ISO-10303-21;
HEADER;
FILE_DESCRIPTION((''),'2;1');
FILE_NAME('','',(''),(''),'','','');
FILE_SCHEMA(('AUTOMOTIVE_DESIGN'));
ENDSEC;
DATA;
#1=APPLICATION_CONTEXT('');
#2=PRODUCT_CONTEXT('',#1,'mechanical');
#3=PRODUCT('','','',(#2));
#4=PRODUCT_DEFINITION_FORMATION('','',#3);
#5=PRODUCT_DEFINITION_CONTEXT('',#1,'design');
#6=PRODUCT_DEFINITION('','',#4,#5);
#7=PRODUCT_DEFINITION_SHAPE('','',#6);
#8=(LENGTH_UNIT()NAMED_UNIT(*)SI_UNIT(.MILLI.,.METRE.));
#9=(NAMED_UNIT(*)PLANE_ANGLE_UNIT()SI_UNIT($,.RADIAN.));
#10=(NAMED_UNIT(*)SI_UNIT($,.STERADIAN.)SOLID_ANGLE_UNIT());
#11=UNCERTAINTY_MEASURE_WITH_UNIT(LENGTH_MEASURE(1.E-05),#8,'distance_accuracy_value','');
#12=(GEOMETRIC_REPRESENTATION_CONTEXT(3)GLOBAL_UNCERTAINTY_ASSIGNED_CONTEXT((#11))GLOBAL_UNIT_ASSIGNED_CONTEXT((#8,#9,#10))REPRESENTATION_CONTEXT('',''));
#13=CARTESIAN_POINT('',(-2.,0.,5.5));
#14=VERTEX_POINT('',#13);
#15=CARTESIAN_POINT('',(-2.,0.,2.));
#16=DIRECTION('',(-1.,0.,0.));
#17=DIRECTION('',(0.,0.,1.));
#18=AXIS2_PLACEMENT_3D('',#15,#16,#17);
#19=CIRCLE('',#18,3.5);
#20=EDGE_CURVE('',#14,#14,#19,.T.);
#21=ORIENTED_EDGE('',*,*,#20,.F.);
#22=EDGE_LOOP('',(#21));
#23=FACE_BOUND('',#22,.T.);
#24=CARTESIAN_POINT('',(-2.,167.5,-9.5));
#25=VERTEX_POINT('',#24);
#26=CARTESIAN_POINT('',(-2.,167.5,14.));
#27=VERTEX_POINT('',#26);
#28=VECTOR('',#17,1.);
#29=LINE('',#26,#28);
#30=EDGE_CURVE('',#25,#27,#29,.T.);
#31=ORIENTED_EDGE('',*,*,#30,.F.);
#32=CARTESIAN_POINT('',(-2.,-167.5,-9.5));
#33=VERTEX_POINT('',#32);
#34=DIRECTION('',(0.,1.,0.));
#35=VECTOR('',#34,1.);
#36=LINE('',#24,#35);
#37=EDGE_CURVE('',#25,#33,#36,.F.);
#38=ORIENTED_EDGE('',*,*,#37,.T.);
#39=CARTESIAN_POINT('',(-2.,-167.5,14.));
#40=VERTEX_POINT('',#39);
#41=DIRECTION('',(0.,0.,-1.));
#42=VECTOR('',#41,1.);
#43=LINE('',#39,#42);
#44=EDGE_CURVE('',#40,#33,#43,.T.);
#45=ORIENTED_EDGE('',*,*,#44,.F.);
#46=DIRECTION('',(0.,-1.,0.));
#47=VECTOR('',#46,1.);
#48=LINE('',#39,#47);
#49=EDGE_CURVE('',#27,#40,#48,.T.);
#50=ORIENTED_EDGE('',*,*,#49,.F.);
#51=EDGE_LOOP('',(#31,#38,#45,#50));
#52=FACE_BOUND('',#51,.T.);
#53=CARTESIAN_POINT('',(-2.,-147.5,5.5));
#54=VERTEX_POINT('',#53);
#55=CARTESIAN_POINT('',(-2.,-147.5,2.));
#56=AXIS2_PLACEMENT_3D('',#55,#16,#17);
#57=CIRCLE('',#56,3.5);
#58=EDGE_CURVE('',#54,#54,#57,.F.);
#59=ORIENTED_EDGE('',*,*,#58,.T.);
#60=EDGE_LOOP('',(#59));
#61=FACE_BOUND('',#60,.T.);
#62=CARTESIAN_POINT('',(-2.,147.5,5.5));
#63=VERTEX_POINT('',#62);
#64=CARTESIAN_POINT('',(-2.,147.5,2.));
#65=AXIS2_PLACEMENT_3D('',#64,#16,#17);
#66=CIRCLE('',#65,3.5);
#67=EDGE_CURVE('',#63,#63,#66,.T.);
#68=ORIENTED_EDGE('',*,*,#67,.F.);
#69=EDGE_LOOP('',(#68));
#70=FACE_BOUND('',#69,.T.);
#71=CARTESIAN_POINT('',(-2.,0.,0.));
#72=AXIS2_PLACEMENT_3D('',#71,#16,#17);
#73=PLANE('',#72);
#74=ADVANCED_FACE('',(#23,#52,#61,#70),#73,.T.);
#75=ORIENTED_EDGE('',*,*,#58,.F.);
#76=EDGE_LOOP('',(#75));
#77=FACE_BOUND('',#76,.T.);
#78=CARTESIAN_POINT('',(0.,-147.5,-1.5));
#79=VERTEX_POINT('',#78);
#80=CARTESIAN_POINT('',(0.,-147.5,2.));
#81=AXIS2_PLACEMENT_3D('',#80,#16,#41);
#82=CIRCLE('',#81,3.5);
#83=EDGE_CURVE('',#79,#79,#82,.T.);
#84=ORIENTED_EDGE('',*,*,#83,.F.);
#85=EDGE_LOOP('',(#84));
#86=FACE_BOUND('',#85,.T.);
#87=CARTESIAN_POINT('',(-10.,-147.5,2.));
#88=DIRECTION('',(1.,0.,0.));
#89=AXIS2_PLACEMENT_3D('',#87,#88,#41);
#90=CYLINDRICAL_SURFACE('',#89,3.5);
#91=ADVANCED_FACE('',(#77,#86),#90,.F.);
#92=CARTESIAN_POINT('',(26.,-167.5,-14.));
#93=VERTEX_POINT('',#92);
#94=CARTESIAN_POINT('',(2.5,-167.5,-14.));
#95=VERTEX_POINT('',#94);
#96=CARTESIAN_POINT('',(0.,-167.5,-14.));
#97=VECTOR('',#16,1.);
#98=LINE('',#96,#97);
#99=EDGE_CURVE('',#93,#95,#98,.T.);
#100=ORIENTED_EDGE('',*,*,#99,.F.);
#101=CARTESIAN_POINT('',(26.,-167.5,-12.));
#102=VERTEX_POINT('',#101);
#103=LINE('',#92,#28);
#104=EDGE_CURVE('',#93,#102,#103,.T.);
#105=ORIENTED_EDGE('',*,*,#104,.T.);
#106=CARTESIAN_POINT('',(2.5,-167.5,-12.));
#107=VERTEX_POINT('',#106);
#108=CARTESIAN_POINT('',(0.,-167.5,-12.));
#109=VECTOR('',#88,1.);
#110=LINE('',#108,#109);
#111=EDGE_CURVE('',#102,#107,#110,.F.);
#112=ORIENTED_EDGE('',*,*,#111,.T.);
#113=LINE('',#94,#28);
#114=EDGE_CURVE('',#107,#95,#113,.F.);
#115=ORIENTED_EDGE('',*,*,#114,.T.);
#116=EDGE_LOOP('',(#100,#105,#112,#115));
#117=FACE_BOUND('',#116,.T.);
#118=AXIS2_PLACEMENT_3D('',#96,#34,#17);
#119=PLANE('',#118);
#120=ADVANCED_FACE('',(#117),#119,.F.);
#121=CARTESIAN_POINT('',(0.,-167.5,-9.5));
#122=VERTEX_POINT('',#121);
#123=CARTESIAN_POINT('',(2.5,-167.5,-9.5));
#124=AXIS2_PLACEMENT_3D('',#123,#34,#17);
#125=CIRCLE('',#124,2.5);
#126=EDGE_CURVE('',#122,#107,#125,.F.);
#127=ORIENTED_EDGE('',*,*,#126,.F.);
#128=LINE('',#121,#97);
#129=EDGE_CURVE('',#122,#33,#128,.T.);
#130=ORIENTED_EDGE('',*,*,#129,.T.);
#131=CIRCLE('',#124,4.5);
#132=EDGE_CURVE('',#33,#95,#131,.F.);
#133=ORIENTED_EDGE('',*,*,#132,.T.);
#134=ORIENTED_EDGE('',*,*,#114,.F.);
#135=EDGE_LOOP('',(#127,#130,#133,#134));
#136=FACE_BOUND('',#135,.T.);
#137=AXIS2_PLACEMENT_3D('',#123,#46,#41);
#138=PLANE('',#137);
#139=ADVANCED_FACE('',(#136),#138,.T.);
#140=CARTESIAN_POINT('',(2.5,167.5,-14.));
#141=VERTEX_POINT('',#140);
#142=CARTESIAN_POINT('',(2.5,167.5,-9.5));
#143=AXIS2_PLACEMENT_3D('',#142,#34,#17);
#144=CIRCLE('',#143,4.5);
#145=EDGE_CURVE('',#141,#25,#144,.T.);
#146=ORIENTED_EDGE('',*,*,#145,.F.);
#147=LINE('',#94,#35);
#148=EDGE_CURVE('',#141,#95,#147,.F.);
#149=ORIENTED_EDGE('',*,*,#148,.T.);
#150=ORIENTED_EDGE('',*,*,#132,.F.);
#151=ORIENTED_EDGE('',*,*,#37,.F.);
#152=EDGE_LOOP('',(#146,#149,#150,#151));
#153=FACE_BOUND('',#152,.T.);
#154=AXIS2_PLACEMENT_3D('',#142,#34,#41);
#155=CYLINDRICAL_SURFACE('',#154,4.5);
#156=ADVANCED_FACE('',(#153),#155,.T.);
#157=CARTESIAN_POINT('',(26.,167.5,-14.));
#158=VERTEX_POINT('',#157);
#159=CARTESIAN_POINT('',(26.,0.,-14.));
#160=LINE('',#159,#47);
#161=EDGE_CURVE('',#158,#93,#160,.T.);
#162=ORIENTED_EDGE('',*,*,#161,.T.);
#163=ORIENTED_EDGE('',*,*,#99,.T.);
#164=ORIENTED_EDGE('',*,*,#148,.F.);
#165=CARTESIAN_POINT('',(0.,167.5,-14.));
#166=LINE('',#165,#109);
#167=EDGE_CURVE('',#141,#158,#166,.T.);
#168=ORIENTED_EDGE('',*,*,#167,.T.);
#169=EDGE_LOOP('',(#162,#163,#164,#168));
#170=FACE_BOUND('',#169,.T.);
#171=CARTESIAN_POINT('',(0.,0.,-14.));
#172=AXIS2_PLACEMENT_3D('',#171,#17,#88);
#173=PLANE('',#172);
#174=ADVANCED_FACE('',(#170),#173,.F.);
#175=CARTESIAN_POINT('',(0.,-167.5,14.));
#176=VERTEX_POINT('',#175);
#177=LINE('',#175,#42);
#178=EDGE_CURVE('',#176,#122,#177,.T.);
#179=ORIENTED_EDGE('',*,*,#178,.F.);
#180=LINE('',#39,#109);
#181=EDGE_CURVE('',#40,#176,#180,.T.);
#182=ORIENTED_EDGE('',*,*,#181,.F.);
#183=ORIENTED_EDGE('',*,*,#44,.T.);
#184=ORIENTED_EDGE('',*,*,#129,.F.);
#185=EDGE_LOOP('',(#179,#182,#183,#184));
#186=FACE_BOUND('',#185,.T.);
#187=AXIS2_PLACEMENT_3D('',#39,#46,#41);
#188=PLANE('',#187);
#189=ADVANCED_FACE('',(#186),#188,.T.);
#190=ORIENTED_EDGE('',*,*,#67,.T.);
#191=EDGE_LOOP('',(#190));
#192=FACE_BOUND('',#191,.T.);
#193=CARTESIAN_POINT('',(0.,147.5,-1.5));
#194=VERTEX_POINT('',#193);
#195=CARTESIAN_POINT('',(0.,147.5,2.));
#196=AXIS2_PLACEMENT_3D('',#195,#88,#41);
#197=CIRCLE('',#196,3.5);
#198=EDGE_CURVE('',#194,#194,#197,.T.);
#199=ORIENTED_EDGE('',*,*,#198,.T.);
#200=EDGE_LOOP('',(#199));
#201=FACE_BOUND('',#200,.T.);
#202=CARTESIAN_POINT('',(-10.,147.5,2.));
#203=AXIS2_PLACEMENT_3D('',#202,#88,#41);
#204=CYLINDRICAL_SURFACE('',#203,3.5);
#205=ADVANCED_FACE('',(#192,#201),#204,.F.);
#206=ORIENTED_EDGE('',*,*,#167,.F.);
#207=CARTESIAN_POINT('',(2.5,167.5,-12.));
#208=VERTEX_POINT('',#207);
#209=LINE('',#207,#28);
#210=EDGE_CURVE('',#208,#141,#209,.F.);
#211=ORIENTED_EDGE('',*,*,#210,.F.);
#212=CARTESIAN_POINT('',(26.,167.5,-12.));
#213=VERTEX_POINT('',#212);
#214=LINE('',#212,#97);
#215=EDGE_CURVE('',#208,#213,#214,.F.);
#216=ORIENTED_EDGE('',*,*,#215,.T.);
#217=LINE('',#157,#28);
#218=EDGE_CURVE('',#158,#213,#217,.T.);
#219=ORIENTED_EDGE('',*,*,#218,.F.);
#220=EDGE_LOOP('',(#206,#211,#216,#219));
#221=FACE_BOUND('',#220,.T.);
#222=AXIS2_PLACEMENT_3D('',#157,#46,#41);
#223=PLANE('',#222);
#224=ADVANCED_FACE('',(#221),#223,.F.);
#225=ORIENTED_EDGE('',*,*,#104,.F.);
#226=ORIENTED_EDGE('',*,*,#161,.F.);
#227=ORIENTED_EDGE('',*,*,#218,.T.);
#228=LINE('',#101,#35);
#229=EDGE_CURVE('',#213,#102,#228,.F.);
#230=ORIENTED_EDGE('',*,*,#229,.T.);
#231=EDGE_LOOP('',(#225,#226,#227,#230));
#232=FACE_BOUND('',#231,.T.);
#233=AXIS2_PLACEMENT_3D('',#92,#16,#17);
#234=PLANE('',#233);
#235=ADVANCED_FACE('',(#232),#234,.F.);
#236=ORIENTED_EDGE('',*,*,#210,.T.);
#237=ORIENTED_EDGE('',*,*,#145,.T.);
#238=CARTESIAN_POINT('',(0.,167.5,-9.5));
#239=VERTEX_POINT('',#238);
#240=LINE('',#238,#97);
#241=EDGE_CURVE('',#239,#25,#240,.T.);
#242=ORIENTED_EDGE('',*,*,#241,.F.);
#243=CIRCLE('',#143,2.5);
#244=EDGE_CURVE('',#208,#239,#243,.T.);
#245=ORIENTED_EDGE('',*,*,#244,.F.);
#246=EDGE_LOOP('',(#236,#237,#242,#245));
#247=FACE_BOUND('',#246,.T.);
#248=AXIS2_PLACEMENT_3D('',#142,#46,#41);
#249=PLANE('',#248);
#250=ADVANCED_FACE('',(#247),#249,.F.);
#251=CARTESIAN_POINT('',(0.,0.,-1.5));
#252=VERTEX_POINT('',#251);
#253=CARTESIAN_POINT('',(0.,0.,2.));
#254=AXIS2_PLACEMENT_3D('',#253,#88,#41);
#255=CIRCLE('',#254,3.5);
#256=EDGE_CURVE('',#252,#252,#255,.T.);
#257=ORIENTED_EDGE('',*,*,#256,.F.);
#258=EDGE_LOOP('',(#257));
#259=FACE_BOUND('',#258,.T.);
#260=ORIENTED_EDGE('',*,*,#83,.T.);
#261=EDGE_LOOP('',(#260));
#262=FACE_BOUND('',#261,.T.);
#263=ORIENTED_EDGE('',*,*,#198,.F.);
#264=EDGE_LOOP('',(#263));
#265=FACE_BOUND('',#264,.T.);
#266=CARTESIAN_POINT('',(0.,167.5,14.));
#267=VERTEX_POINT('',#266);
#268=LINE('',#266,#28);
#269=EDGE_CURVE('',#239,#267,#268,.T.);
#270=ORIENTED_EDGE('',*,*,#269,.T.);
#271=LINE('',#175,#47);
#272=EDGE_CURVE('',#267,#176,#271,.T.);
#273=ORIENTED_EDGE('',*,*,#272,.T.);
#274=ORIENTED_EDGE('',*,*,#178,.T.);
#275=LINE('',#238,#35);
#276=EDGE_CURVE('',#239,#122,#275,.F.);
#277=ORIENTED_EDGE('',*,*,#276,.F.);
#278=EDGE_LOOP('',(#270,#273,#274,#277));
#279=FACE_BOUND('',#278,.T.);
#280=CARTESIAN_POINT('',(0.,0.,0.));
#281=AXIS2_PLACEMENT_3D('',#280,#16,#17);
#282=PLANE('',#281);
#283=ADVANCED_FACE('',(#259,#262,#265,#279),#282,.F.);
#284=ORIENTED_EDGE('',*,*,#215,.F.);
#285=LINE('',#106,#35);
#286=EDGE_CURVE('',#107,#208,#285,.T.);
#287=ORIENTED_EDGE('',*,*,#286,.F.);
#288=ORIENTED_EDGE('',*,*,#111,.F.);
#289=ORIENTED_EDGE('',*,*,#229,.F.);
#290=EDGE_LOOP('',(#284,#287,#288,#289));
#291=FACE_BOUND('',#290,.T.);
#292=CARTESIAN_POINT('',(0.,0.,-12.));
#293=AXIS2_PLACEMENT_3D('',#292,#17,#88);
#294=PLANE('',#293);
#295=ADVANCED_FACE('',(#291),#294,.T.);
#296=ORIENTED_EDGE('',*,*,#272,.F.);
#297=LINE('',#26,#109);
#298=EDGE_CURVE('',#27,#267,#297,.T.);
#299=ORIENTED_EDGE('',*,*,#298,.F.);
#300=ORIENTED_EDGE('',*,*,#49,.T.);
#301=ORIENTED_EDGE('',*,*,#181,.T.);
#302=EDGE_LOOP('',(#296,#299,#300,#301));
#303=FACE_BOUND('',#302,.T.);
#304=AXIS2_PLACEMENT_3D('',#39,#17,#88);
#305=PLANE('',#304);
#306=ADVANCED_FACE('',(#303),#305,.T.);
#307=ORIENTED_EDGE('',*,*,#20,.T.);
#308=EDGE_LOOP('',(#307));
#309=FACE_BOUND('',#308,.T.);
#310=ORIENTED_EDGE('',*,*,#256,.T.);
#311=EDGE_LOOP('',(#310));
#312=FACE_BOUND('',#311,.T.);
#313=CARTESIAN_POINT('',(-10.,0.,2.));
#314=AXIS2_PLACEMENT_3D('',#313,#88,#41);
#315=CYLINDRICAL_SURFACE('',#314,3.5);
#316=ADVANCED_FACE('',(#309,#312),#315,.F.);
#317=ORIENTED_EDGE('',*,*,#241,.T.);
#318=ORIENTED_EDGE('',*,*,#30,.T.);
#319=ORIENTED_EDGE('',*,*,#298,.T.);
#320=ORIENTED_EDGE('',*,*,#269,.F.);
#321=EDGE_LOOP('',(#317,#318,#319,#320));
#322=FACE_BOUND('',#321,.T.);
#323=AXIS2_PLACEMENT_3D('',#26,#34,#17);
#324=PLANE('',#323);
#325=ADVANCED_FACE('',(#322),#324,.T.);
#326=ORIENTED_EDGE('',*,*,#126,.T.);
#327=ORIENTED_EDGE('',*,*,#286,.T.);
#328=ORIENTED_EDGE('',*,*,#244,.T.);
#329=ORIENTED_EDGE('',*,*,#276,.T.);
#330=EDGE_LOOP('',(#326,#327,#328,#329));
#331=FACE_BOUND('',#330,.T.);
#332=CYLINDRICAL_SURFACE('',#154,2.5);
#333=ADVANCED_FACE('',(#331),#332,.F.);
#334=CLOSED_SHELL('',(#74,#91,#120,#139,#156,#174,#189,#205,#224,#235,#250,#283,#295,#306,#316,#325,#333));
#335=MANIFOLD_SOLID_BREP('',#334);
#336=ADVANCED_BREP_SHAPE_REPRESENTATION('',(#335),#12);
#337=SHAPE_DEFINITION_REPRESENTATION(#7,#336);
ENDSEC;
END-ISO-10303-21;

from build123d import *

# Parameters (mm, degrees)
SKETCH1_W                    = 28
SKETCH1_H                    = 335
BASE_FLANGE1_DEPTH           = 2
EDGE_FLANGE1_STRIP_W         = 13
EDGE_FLANGE1_STRIP_H         = 2
EDGE_FLANGE1_STRIP_CUT_DEPTH = 335
EDGE_FLANGE1_DEPTH           = 335
SKETCH9_R                    = 3.5
CUT_EXTRUDE1_DEPTH           = 10
LPATTERN1_COUNT              = 2
LPATTERN1_PITCH              = 147.5


# Sheet-metal steps are written as plain solids
with BuildPart() as part:
    # Sketch1 → Base-Flange1 (new body)
    with BuildSketch(Plane(origin=(0, 0, 0), x_dir=(0, 0, -1), z_dir=(1, 0, 0))):
        Rectangle(SKETCH1_W, SKETCH1_H)
    extrude(amount=-BASE_FLANGE1_DEPTH)

    # Edge-Flange1 strip (across the edge) → Edge-Flange1 strip cut (cut)
    with BuildSketch(Plane(origin=(0, -167.5, -14), x_dir=(0, 0, 1), z_dir=(0, 1, 0))):
        with Locations((-2, -1)):
            Rectangle(EDGE_FLANGE1_STRIP_W, EDGE_FLANGE1_STRIP_H)
    extrude(amount=EDGE_FLANGE1_STRIP_CUT_DEPTH, mode=Mode.SUBTRACT)

    # Edge-Flange1 section (across the edge) → Edge-Flange1 (add)
    with BuildSketch(Plane(origin=(0, -167.5, -14), x_dir=(0, 0, 1), z_dir=(0, 1, 0))):
        with BuildLine():
            Line((0, 2.5), (0, 26))
            Line((0, 26), (2, 26))
            Line((2, 26), (2, 2.5))
            ThreePointArc((2, 2.5), (2.732233047, 0.732233047), (4.5, 0))
            Line((4.5, 0), (4.5, -2))
            ThreePointArc((4.5, -2), (1.318019485, -0.681980515), (0, 2.5))
        make_face()
    extrude(amount=EDGE_FLANGE1_DEPTH)

    # Sketch9 → Cut-Extrude1 (cut)
    with BuildSketch(Plane(origin=(0, 0, 0), x_dir=(0, 0, -1), z_dir=(1, 0, 0))):
        with Locations((-2, 147.5)):
            Circle(SKETCH9_R)
    cut_extrude1 = extrude(amount=-CUT_EXTRUDE1_DEPTH, mode=Mode.SUBTRACT)

    # Mirror1: Cut-Extrude1 across plane
    add(cut_extrude1.mirror(Plane.ZX), mode=Mode.SUBTRACT)

    # LPattern1: Cut-Extrude1 ×2
    with Locations(*[(0, -i * LPATTERN1_PITCH, 0) for i in range(1, LPATTERN1_COUNT)]):
        add(cut_extrude1, mode=Mode.SUBTRACT)


solid = part.part
